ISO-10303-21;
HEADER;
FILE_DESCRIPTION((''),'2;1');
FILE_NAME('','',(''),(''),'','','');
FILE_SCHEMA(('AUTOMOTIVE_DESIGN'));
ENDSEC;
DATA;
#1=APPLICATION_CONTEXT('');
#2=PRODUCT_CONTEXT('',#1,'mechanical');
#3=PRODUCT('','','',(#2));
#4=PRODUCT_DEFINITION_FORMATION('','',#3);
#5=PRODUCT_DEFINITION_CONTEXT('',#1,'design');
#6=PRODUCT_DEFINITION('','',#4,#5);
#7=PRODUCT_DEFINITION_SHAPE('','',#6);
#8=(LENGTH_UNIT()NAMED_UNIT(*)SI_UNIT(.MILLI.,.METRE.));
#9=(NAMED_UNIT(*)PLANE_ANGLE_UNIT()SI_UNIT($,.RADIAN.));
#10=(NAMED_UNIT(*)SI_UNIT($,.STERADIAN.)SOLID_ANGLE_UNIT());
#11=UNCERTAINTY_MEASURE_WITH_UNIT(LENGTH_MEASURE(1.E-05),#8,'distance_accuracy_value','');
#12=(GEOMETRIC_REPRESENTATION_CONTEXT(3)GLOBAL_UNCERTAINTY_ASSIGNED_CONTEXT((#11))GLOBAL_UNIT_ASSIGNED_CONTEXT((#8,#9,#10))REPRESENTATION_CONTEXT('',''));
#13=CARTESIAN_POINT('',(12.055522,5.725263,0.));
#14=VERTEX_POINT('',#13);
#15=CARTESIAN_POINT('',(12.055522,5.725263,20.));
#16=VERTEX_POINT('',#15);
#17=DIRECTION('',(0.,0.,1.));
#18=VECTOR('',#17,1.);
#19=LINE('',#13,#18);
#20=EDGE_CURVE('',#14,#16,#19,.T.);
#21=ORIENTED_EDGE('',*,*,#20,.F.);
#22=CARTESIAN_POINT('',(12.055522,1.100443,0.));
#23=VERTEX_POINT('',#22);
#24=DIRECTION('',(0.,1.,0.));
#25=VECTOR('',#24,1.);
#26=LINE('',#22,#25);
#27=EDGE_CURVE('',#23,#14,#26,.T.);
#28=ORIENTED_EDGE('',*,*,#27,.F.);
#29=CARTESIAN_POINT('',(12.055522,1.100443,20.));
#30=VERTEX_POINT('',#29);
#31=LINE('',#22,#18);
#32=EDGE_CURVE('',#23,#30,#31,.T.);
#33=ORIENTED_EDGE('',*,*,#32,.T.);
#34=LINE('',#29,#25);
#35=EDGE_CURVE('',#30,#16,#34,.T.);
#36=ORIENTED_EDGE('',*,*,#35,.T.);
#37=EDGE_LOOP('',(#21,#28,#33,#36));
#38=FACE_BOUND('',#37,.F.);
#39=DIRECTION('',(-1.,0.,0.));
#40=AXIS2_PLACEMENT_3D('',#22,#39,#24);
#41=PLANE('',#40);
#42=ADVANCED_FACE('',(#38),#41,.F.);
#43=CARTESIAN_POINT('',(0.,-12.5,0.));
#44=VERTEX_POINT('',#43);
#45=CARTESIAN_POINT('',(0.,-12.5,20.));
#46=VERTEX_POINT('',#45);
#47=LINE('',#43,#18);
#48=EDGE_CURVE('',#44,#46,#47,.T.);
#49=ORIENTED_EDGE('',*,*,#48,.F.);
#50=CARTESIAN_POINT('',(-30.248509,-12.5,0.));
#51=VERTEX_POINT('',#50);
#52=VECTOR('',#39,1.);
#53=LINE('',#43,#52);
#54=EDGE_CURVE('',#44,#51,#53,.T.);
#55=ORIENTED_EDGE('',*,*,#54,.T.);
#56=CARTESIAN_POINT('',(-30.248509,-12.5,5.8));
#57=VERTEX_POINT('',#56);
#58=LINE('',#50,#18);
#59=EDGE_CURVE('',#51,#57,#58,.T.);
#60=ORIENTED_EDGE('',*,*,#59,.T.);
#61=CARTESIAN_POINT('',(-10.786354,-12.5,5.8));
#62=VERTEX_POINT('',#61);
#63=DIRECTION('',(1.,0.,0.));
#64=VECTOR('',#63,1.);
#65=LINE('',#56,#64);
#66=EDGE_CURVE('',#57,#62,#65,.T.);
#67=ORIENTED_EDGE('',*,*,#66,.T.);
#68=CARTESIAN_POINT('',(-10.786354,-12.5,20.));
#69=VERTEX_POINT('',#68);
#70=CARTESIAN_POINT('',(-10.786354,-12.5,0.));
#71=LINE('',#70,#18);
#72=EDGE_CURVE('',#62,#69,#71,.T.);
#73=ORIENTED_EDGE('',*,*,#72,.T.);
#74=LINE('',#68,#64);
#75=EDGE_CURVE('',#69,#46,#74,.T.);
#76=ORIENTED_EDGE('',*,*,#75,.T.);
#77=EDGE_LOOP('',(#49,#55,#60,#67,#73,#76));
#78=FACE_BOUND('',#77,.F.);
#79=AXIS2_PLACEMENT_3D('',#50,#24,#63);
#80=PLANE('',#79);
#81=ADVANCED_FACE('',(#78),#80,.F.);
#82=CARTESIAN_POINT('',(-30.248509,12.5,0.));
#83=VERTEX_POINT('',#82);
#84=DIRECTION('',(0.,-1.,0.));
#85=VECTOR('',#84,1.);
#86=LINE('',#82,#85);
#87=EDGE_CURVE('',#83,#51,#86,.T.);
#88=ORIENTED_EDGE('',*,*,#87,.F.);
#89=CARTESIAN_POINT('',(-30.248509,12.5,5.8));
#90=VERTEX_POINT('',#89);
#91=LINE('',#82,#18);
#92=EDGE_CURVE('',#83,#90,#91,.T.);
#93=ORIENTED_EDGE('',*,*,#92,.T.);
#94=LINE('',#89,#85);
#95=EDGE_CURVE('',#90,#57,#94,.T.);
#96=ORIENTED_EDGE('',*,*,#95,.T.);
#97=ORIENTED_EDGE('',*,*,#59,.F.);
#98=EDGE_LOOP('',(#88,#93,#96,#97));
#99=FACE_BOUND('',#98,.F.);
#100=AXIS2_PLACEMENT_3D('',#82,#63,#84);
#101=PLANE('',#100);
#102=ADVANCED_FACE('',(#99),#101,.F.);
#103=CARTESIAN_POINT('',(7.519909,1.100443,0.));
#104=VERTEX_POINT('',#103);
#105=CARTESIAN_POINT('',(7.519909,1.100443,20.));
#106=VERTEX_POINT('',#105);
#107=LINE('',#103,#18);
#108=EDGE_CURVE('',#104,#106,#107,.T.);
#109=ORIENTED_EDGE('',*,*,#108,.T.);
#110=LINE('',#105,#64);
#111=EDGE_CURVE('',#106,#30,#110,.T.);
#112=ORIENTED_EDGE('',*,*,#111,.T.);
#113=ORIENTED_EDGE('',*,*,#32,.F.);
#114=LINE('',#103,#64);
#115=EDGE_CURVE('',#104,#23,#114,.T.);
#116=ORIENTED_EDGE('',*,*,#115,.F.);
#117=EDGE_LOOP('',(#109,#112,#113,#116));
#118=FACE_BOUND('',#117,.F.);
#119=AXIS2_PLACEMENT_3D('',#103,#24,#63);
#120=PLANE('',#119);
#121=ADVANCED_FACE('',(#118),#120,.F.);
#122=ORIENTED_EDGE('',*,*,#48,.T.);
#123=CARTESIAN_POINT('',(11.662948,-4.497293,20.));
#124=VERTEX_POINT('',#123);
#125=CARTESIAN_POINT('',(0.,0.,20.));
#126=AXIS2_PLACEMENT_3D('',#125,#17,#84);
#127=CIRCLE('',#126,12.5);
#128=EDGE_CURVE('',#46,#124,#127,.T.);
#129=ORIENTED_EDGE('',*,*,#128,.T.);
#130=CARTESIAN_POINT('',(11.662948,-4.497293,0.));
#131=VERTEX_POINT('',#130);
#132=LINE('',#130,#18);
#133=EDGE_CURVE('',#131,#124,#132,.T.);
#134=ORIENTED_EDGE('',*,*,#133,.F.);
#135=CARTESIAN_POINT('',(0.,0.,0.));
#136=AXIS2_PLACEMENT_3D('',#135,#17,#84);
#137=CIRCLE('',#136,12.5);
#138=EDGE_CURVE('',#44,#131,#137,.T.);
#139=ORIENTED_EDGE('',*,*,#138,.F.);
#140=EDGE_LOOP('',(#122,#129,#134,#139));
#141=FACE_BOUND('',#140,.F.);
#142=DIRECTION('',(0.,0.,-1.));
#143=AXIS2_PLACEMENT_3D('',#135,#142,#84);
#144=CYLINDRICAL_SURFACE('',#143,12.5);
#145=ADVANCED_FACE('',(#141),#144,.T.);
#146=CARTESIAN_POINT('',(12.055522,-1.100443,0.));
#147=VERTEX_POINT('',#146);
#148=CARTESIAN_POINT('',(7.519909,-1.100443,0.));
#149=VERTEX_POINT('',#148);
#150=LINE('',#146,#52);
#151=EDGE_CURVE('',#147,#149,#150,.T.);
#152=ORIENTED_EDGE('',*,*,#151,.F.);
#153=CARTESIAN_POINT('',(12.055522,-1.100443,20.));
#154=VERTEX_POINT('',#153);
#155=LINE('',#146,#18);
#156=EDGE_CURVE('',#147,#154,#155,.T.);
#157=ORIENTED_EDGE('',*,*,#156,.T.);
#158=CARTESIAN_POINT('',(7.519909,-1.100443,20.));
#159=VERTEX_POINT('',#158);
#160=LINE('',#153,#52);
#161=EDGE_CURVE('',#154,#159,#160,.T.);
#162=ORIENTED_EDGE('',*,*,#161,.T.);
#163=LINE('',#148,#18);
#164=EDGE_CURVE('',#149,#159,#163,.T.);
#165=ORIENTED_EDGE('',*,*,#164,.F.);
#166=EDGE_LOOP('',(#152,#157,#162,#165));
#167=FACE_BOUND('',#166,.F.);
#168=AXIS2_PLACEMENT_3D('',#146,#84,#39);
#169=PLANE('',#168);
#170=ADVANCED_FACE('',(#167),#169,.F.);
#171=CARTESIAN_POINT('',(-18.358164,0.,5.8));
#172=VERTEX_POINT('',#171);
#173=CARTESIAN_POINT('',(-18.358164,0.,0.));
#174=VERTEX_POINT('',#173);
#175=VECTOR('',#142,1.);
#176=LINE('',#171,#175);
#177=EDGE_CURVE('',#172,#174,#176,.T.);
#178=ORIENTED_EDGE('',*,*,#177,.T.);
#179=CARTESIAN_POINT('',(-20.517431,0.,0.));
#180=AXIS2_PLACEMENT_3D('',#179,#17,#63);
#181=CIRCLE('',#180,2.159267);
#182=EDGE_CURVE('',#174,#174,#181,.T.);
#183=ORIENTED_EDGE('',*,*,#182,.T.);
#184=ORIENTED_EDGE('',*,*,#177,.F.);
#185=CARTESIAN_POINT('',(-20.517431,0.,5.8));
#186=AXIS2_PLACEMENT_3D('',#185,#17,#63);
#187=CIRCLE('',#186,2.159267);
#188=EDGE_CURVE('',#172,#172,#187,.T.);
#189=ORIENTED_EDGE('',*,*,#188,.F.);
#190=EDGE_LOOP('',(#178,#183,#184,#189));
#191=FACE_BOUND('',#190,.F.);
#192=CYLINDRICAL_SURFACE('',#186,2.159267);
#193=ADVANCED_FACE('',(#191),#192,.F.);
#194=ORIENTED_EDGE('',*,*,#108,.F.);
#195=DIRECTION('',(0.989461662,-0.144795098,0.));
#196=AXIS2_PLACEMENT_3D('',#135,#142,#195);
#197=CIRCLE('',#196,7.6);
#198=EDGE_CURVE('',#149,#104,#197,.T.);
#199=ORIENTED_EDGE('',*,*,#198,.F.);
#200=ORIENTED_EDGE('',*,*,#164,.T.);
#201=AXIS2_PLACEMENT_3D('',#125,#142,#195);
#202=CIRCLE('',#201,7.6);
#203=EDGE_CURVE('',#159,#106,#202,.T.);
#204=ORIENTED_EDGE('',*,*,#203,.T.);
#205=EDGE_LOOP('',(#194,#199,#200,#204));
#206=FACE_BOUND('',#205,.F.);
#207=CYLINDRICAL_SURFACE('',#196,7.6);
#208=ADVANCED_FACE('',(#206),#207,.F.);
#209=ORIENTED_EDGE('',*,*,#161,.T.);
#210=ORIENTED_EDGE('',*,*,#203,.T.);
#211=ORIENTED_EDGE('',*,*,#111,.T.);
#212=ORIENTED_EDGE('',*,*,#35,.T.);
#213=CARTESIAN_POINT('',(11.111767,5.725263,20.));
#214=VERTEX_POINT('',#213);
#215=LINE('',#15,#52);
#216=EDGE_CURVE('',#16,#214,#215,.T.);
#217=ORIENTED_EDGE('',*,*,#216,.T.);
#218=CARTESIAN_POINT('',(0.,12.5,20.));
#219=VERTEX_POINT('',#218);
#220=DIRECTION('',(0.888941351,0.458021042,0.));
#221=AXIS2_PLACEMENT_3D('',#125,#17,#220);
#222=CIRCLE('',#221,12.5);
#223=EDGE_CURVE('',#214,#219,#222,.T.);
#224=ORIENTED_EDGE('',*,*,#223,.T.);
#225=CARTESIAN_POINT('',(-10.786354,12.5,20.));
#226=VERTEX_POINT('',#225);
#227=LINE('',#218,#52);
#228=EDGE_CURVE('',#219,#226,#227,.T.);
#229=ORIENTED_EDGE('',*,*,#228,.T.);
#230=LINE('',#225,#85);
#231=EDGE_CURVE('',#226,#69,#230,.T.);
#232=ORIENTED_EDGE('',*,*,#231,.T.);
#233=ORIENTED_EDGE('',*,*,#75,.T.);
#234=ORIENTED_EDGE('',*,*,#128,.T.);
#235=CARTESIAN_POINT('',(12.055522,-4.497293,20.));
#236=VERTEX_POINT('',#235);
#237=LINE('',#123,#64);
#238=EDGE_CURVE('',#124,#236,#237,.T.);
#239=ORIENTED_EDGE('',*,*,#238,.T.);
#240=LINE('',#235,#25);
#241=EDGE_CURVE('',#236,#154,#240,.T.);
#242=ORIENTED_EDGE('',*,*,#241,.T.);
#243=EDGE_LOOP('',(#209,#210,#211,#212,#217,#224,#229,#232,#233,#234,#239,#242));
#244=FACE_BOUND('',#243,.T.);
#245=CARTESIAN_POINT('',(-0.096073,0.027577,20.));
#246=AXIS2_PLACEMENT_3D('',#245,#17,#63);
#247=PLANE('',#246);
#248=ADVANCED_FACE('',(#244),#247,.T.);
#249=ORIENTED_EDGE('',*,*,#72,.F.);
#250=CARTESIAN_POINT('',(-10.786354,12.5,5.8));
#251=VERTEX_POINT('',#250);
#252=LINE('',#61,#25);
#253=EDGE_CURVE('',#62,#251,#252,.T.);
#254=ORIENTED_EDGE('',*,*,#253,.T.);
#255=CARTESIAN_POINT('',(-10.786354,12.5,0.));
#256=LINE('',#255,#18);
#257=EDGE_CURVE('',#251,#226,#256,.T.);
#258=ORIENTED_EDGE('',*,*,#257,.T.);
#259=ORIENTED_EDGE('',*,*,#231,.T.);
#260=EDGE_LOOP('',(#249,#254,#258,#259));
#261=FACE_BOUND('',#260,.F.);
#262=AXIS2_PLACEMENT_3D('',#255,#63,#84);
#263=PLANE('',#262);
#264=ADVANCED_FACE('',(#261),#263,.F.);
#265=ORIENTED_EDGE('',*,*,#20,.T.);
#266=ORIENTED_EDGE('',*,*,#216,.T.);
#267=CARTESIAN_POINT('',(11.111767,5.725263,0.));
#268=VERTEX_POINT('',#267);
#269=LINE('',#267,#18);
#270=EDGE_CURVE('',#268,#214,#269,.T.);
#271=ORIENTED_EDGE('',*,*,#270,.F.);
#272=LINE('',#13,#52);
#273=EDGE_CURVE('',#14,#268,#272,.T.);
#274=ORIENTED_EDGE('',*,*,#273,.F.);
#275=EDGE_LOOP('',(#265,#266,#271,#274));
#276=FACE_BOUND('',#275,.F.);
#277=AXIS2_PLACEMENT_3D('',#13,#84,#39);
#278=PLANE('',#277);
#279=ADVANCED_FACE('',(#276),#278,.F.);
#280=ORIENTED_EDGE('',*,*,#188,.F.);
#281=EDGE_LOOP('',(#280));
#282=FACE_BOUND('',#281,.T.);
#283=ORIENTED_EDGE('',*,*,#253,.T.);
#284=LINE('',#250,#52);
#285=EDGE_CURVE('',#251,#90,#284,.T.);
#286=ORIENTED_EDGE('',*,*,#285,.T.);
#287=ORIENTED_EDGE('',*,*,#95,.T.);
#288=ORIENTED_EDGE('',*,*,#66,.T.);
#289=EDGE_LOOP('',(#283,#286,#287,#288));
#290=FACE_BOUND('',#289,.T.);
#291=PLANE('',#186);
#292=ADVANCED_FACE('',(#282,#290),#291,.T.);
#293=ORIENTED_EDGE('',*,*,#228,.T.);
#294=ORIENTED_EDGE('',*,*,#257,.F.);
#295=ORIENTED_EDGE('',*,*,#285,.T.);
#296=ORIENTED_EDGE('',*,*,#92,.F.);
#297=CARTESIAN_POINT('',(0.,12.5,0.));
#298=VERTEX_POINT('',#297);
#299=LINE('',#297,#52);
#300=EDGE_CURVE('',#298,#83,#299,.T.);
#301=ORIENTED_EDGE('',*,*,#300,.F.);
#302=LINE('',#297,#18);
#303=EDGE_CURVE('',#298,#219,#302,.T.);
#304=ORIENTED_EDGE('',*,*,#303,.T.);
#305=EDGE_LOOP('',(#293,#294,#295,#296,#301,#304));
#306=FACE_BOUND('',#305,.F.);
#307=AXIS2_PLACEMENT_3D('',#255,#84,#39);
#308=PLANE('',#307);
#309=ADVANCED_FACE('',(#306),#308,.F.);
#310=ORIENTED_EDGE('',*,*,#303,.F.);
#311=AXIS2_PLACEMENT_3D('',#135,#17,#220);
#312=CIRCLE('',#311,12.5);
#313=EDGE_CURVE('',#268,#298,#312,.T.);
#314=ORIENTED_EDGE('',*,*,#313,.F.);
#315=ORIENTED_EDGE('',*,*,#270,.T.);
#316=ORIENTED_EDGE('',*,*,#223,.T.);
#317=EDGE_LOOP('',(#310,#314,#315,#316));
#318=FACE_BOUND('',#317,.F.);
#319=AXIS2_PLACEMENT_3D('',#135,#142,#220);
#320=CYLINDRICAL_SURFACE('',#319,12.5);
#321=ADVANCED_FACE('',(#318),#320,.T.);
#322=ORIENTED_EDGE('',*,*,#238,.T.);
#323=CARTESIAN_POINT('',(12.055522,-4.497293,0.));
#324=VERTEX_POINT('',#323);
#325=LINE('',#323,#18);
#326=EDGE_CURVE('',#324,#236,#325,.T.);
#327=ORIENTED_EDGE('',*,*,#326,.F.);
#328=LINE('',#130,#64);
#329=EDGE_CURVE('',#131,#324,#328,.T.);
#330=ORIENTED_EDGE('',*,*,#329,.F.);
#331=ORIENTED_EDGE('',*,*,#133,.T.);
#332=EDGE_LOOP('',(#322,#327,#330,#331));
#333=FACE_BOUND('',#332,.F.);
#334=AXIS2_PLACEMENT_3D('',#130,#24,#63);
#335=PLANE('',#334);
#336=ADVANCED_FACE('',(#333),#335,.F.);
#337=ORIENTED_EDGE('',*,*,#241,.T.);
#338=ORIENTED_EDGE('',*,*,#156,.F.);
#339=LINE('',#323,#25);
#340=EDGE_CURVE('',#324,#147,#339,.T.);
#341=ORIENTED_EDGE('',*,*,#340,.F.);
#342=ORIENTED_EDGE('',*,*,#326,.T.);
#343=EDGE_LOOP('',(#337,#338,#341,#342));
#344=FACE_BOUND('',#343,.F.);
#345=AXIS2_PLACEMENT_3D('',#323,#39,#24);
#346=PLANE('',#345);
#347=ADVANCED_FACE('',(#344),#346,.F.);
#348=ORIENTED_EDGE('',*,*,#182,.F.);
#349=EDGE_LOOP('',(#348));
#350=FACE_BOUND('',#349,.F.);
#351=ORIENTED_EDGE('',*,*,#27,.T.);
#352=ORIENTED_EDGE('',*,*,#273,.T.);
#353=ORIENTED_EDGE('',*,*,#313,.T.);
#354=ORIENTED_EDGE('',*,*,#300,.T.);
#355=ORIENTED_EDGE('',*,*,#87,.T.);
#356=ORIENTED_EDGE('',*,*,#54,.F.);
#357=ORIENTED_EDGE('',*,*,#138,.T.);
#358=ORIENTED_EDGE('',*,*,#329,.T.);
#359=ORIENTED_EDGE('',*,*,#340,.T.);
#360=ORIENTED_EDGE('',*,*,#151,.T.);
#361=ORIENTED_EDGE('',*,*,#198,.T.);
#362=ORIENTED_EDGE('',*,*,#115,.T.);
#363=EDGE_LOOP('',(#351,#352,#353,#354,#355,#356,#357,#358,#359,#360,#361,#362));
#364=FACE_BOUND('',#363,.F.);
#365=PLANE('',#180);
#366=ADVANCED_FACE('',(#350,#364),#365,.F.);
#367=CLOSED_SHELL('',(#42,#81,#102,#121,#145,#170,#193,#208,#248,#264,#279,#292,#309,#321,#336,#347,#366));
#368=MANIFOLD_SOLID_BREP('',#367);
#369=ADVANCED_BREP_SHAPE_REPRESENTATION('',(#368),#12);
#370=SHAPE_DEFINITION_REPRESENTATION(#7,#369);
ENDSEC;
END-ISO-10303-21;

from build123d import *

# Parameters (mm, degrees)
F1_DEPTH = 20
F2_DEPTH = 5.8
F3_R     = 2.1592673483
F4_DEPTH = 25


# Not quite as in the source:
# - a feature names something its author has since deleted; it is built from what else it names


with BuildPart() as f1:
    # F0 (on Top) → F1 (new body)
    with BuildSketch(Plane.XY):
        with BuildLine():
            ThreePointArc((7.5199086274, -1.1004427451), (-7.6, 0), (7.5199086274, 1.1004427451))
            Line((7.5199086274, 1.1004427451), (12.0555223817, 1.1004427451))
            Line((12.0555223817, 1.1004427451), (12.0555223817, 5.7252630293))
            Line((12.0555223817, 5.7252630293), (11.1117668822, 5.7252630293))
            ThreePointArc((11.1117668822, 5.7252630293), (6.5070812248, 10.6727641187), (0, 12.5))
            Line((0, 12.5), (-10.78635397, 12.5))
            Line((-10.78635397, 12.5), (-10.78635397, 4.5))
            Line((-10.78635397, 4.5), (-10.78635397, -4.5))
            Line((-10.78635397, -4.5), (-10.78635397, -12.5))
            Line((-10.78635397, -12.5), (0, -12.5))
            ThreePointArc((0, -12.5), (7.0722638762, -10.3069434687), (11.6629478347, -4.4972933866))
            Line((11.6629478347, -4.4972933866), (12.0555223817, -4.4972933866))
            Line((12.0555223817, -4.4972933866), (12.0555223817, -1.1004427451))
            Line((12.0555223817, -1.1004427451), (7.5199086274, -1.1004427451))
        make_face()
    extrude(amount=F1_DEPTH)

    # F0 (on Top) → F2 (join)
    with BuildSketch(Plane.XY):
        Polygon((-10.78635397, 4.5), (-10.78635397, 12.5), (-30.2485086955, 12.5), (-30.2485086955, -4.5), (-30.2485086955, -12.5), (-10.78635397, -12.5), (-10.78635397, -4.5), align=None)
    extrude(amount=F2_DEPTH)

    # F3 (on face) → F4 (cut)
    with BuildSketch(Plane.XY.offset(5.8)):
        with Locations((-20.5174313327, 0)):
            Circle(F3_R)
    extrude(amount=-F4_DEPTH, mode=Mode.SUBTRACT)


solid = f1.part
